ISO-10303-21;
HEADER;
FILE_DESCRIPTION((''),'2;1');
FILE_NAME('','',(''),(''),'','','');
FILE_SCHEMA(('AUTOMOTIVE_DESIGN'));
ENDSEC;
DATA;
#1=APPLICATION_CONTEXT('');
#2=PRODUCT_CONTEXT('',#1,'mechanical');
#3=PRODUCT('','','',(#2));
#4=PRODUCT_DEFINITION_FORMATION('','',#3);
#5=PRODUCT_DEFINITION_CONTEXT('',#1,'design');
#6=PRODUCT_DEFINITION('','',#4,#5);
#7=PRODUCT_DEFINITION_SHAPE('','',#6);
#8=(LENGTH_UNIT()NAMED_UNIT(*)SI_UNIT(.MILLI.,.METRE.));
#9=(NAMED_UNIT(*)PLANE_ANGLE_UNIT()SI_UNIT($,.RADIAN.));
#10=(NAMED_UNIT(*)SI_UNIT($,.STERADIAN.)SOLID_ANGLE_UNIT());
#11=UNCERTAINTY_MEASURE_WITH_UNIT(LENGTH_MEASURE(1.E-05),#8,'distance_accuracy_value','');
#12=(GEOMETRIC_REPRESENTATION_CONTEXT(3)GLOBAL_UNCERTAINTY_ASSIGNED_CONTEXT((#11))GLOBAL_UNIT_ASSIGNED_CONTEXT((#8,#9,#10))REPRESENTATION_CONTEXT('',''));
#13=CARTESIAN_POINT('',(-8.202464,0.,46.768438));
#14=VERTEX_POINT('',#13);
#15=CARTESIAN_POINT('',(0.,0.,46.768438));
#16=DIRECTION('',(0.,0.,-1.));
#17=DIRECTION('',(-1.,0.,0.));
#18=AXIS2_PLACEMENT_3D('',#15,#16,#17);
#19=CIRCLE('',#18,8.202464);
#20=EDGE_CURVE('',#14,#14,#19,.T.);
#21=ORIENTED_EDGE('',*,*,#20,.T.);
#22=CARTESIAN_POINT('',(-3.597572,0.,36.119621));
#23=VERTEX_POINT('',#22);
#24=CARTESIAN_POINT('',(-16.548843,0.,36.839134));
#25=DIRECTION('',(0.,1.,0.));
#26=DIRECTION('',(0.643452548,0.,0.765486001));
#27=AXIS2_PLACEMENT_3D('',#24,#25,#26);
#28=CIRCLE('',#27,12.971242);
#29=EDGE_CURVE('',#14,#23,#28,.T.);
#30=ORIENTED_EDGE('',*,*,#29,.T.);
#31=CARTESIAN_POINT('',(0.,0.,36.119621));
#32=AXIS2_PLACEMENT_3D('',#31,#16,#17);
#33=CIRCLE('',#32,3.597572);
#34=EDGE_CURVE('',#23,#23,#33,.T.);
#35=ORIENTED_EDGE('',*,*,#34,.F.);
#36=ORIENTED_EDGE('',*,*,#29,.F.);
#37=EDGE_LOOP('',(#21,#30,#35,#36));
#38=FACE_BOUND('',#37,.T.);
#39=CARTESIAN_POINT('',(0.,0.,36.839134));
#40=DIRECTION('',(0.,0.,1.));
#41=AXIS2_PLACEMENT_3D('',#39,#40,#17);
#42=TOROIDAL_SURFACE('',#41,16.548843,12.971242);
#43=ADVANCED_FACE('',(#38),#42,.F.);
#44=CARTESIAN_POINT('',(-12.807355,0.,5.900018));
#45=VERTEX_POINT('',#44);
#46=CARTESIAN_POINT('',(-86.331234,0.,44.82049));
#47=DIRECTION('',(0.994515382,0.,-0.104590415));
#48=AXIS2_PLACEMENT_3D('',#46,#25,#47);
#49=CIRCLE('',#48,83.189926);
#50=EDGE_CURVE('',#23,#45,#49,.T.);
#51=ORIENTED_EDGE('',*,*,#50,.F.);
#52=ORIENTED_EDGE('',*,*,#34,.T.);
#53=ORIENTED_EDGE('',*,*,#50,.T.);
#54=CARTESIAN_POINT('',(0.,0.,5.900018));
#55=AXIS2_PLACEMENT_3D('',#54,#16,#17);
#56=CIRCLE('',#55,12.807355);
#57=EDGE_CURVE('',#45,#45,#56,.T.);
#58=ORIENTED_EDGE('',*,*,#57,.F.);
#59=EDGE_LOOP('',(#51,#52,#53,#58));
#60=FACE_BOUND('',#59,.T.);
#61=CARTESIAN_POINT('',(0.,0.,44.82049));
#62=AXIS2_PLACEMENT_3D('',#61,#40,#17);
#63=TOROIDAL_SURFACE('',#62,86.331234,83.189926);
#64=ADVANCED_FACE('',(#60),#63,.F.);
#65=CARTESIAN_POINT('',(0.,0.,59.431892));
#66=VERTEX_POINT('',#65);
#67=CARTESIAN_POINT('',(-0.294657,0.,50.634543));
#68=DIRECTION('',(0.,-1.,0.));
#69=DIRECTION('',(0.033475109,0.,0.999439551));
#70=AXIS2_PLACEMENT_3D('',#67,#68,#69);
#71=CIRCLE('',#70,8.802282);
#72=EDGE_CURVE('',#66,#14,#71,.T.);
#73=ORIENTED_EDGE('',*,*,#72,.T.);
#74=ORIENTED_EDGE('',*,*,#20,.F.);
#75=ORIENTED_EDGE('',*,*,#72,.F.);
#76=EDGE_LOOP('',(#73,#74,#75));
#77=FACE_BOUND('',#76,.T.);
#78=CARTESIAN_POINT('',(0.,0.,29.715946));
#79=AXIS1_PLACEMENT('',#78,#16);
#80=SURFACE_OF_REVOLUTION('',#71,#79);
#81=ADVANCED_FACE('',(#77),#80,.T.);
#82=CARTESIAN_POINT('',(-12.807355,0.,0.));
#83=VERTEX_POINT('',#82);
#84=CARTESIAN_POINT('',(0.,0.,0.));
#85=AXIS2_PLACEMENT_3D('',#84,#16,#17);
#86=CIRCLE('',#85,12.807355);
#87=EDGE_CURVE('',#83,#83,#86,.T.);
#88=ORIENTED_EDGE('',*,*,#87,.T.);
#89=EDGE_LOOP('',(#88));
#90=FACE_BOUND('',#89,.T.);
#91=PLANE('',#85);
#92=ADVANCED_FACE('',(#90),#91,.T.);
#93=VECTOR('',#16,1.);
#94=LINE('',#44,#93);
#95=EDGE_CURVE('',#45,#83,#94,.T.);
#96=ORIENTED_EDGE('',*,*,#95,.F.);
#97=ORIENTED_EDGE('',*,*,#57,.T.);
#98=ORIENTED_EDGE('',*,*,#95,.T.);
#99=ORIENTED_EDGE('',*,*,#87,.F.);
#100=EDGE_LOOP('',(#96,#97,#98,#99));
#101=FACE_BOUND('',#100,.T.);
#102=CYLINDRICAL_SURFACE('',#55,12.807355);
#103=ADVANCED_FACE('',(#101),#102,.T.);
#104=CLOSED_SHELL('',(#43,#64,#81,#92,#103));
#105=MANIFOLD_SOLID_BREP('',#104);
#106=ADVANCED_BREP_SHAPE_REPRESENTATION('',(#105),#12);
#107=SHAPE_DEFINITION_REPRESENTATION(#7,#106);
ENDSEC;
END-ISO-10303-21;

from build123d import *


# Not quite as in the source:
# - a feature of the source that left no trace in its solid (it failed there, or was rolled back) is left out


with BuildPart() as f1:
    # F0 (on Front) → F1 (revolve)
    with BuildSketch(Plane.XZ):
        with BuildLine():
            Line((0, 0), (0, 59.4318918884))
            ThreePointArc((0, 59.4318918884), (-7.6825377996, 55.4198742906), (-8.2024643198, 46.768438071))
            ThreePointArc((-8.2024643198, 46.768438071), (-4.6430967507, 41.9875630921), (-3.597572213, 36.1196212471))
            ThreePointArc((-3.597572213, 36.1196212471), (-6.7547874228, 20.5686230303), (-12.8073552623, 5.9000179172))
            Line((-12.8073552623, 5.9000179172), (-12.8073552623, 0))
            Line((-12.8073552623, 0), (0, 0))
        make_face()
    revolve(axis=Axis((0, 0, 29.7159459442), (0, 0, -1)))


solid = f1.part
